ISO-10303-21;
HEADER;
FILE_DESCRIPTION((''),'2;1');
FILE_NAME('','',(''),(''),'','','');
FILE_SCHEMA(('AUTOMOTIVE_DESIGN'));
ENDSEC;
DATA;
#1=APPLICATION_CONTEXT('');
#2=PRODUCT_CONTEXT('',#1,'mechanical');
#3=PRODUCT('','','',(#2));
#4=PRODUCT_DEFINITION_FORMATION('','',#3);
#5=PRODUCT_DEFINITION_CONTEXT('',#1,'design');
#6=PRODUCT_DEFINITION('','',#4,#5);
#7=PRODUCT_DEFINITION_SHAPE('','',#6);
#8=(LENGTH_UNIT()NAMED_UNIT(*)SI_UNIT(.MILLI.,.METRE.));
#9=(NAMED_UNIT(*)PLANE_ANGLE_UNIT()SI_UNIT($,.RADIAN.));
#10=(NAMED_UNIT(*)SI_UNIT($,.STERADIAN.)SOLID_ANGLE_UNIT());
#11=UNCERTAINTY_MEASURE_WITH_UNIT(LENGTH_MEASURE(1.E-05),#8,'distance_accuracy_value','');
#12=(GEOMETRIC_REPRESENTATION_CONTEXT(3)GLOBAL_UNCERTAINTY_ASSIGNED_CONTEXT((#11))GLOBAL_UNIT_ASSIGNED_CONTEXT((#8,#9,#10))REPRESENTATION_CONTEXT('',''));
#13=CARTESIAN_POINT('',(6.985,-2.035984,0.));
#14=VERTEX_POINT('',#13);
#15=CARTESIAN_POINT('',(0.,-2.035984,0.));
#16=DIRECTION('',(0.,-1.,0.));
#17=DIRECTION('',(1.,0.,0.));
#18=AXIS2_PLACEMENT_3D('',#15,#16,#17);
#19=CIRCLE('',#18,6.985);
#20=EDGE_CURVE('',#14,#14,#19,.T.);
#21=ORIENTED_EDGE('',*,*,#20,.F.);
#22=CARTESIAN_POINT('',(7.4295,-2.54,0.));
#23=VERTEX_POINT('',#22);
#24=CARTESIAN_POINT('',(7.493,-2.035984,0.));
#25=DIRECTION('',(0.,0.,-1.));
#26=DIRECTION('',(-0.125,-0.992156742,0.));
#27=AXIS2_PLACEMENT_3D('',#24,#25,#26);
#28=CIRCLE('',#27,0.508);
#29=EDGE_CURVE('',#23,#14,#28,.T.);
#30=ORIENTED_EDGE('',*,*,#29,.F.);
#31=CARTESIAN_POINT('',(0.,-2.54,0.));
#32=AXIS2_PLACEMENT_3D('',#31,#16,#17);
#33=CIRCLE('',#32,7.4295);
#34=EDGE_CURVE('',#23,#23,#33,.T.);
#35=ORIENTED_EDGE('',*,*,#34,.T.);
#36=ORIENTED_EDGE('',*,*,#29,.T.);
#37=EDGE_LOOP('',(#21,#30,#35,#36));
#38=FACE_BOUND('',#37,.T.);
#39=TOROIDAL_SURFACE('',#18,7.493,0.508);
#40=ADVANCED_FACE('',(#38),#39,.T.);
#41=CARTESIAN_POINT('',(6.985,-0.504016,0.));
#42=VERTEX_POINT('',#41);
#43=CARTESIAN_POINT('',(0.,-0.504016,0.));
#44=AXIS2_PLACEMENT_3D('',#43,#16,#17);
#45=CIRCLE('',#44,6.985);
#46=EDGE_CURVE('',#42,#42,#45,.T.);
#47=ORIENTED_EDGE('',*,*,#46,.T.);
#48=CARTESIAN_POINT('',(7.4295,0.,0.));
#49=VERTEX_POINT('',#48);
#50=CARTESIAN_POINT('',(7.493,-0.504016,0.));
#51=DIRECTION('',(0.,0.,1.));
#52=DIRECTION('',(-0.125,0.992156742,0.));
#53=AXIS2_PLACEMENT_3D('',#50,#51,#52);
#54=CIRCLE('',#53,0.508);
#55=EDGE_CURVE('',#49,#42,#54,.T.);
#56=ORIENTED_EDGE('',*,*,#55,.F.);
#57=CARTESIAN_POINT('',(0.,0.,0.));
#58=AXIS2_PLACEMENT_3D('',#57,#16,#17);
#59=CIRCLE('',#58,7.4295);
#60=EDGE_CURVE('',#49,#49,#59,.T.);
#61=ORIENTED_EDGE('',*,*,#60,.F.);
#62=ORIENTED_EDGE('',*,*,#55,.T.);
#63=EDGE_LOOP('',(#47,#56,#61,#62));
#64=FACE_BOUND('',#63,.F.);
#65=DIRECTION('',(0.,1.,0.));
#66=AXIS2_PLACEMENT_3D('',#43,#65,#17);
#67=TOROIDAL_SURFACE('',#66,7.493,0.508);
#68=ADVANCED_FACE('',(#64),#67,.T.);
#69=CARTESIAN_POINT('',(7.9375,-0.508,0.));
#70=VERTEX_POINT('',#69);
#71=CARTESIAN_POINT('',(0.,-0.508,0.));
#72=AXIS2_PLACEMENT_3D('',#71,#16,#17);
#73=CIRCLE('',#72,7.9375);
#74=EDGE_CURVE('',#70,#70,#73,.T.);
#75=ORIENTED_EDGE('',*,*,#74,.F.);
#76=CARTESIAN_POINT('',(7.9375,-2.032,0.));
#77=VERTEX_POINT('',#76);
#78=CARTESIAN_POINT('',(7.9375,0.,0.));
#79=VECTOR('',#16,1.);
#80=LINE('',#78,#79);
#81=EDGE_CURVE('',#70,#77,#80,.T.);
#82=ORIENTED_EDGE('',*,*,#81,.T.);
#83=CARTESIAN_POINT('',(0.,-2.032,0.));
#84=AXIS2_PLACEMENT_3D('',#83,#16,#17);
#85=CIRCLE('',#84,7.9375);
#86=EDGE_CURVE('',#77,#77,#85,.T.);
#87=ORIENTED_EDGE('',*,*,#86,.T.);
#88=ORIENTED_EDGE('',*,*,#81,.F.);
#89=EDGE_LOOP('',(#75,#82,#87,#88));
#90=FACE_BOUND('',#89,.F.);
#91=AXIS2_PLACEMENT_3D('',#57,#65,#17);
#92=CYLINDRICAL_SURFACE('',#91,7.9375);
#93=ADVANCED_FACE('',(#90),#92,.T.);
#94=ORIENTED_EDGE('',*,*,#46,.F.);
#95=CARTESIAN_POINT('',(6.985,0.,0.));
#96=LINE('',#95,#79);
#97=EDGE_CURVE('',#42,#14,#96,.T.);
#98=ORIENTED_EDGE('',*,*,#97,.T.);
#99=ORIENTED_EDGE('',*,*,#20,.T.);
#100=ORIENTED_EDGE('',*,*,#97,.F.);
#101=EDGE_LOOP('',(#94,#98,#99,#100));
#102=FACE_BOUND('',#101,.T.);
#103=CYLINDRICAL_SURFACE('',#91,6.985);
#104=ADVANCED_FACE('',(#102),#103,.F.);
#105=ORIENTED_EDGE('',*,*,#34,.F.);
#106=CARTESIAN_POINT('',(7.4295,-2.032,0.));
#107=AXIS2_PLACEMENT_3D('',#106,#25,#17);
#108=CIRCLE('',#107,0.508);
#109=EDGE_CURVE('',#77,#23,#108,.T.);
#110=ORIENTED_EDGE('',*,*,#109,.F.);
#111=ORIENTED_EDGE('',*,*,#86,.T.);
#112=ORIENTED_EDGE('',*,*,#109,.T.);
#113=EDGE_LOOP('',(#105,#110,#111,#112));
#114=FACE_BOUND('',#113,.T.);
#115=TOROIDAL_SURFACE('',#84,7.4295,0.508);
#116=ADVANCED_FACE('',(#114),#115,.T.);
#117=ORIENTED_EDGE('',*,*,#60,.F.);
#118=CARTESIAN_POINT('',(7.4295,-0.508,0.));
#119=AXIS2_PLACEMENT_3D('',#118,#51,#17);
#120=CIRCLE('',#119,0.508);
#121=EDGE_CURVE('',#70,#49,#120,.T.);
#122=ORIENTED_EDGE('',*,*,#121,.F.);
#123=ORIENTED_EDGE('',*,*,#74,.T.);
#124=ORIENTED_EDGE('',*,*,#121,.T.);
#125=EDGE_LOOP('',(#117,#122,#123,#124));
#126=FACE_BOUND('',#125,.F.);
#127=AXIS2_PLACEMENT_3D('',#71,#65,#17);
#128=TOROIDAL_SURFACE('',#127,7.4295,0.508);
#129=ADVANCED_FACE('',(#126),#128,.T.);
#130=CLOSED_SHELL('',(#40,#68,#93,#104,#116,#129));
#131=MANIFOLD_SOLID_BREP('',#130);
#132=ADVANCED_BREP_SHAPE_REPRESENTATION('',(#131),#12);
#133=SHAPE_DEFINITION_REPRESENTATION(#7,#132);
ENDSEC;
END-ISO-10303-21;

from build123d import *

# Parameters (mm, degrees)
F0_R     = 7.9375
F0_R_2   = 6.985
F1_DEPTH = 2.54
F2_R     = 0.508


# Not quite as in the source:
# - a fillet or chamfer that OpenCascade refuses, or shapes differently, is made with other operations: its cross-section is extruded or revolved along the edge and cut away or added


with BuildPart() as f1:
    # F0 (on Front) → F1 (new body)
    with BuildSketch(Plane.XZ):
        Circle(F0_R)
        Circle(F0_R_2, mode=Mode.SUBTRACT)
    extrude(amount=F1_DEPTH)

    # F2
    f2_edges = [f1.edges().sort_by_distance(p)[0] for p in [
        (-7.9375, -2.54, 0),
        (-7.9375, 0, 0),
    ]]
    fillet(f2_edges, radius=F2_R)

    # F3: fillet of radius 0.508 on 2 edges, made by hand

    # F3_s1 → F3_t2 (revolve, cut)
    with BuildSketch(Plane.XY):
        with BuildLine():
            ThreePointArc((7.4295, 0), (7.112, -0.1680052083), (6.985, -0.5040156248))
            Line((6.985, -0.5040156248), (6.985, 0))
            Line((6.985, 0), (7.4295, 0))
        make_face()
    revolve(axis=Axis((0, 0, 0), (0, -1, 0)), mode=Mode.SUBTRACT)

    # F3_s3 → F3_t4 (revolve, cut)
    with BuildSketch(Plane.XY):
        with BuildLine():
            ThreePointArc((7.4295, -2.54), (7.112, -2.3719947917), (6.985, -2.0359843752))
            Line((6.985, -2.0359843752), (6.985, -2.54))
            Line((6.985, -2.54), (7.4295, -2.54))
        make_face()
    revolve(axis=Axis((0, -2.54, 0), (0, -1, 0)), mode=Mode.SUBTRACT)


solid = f1.part
